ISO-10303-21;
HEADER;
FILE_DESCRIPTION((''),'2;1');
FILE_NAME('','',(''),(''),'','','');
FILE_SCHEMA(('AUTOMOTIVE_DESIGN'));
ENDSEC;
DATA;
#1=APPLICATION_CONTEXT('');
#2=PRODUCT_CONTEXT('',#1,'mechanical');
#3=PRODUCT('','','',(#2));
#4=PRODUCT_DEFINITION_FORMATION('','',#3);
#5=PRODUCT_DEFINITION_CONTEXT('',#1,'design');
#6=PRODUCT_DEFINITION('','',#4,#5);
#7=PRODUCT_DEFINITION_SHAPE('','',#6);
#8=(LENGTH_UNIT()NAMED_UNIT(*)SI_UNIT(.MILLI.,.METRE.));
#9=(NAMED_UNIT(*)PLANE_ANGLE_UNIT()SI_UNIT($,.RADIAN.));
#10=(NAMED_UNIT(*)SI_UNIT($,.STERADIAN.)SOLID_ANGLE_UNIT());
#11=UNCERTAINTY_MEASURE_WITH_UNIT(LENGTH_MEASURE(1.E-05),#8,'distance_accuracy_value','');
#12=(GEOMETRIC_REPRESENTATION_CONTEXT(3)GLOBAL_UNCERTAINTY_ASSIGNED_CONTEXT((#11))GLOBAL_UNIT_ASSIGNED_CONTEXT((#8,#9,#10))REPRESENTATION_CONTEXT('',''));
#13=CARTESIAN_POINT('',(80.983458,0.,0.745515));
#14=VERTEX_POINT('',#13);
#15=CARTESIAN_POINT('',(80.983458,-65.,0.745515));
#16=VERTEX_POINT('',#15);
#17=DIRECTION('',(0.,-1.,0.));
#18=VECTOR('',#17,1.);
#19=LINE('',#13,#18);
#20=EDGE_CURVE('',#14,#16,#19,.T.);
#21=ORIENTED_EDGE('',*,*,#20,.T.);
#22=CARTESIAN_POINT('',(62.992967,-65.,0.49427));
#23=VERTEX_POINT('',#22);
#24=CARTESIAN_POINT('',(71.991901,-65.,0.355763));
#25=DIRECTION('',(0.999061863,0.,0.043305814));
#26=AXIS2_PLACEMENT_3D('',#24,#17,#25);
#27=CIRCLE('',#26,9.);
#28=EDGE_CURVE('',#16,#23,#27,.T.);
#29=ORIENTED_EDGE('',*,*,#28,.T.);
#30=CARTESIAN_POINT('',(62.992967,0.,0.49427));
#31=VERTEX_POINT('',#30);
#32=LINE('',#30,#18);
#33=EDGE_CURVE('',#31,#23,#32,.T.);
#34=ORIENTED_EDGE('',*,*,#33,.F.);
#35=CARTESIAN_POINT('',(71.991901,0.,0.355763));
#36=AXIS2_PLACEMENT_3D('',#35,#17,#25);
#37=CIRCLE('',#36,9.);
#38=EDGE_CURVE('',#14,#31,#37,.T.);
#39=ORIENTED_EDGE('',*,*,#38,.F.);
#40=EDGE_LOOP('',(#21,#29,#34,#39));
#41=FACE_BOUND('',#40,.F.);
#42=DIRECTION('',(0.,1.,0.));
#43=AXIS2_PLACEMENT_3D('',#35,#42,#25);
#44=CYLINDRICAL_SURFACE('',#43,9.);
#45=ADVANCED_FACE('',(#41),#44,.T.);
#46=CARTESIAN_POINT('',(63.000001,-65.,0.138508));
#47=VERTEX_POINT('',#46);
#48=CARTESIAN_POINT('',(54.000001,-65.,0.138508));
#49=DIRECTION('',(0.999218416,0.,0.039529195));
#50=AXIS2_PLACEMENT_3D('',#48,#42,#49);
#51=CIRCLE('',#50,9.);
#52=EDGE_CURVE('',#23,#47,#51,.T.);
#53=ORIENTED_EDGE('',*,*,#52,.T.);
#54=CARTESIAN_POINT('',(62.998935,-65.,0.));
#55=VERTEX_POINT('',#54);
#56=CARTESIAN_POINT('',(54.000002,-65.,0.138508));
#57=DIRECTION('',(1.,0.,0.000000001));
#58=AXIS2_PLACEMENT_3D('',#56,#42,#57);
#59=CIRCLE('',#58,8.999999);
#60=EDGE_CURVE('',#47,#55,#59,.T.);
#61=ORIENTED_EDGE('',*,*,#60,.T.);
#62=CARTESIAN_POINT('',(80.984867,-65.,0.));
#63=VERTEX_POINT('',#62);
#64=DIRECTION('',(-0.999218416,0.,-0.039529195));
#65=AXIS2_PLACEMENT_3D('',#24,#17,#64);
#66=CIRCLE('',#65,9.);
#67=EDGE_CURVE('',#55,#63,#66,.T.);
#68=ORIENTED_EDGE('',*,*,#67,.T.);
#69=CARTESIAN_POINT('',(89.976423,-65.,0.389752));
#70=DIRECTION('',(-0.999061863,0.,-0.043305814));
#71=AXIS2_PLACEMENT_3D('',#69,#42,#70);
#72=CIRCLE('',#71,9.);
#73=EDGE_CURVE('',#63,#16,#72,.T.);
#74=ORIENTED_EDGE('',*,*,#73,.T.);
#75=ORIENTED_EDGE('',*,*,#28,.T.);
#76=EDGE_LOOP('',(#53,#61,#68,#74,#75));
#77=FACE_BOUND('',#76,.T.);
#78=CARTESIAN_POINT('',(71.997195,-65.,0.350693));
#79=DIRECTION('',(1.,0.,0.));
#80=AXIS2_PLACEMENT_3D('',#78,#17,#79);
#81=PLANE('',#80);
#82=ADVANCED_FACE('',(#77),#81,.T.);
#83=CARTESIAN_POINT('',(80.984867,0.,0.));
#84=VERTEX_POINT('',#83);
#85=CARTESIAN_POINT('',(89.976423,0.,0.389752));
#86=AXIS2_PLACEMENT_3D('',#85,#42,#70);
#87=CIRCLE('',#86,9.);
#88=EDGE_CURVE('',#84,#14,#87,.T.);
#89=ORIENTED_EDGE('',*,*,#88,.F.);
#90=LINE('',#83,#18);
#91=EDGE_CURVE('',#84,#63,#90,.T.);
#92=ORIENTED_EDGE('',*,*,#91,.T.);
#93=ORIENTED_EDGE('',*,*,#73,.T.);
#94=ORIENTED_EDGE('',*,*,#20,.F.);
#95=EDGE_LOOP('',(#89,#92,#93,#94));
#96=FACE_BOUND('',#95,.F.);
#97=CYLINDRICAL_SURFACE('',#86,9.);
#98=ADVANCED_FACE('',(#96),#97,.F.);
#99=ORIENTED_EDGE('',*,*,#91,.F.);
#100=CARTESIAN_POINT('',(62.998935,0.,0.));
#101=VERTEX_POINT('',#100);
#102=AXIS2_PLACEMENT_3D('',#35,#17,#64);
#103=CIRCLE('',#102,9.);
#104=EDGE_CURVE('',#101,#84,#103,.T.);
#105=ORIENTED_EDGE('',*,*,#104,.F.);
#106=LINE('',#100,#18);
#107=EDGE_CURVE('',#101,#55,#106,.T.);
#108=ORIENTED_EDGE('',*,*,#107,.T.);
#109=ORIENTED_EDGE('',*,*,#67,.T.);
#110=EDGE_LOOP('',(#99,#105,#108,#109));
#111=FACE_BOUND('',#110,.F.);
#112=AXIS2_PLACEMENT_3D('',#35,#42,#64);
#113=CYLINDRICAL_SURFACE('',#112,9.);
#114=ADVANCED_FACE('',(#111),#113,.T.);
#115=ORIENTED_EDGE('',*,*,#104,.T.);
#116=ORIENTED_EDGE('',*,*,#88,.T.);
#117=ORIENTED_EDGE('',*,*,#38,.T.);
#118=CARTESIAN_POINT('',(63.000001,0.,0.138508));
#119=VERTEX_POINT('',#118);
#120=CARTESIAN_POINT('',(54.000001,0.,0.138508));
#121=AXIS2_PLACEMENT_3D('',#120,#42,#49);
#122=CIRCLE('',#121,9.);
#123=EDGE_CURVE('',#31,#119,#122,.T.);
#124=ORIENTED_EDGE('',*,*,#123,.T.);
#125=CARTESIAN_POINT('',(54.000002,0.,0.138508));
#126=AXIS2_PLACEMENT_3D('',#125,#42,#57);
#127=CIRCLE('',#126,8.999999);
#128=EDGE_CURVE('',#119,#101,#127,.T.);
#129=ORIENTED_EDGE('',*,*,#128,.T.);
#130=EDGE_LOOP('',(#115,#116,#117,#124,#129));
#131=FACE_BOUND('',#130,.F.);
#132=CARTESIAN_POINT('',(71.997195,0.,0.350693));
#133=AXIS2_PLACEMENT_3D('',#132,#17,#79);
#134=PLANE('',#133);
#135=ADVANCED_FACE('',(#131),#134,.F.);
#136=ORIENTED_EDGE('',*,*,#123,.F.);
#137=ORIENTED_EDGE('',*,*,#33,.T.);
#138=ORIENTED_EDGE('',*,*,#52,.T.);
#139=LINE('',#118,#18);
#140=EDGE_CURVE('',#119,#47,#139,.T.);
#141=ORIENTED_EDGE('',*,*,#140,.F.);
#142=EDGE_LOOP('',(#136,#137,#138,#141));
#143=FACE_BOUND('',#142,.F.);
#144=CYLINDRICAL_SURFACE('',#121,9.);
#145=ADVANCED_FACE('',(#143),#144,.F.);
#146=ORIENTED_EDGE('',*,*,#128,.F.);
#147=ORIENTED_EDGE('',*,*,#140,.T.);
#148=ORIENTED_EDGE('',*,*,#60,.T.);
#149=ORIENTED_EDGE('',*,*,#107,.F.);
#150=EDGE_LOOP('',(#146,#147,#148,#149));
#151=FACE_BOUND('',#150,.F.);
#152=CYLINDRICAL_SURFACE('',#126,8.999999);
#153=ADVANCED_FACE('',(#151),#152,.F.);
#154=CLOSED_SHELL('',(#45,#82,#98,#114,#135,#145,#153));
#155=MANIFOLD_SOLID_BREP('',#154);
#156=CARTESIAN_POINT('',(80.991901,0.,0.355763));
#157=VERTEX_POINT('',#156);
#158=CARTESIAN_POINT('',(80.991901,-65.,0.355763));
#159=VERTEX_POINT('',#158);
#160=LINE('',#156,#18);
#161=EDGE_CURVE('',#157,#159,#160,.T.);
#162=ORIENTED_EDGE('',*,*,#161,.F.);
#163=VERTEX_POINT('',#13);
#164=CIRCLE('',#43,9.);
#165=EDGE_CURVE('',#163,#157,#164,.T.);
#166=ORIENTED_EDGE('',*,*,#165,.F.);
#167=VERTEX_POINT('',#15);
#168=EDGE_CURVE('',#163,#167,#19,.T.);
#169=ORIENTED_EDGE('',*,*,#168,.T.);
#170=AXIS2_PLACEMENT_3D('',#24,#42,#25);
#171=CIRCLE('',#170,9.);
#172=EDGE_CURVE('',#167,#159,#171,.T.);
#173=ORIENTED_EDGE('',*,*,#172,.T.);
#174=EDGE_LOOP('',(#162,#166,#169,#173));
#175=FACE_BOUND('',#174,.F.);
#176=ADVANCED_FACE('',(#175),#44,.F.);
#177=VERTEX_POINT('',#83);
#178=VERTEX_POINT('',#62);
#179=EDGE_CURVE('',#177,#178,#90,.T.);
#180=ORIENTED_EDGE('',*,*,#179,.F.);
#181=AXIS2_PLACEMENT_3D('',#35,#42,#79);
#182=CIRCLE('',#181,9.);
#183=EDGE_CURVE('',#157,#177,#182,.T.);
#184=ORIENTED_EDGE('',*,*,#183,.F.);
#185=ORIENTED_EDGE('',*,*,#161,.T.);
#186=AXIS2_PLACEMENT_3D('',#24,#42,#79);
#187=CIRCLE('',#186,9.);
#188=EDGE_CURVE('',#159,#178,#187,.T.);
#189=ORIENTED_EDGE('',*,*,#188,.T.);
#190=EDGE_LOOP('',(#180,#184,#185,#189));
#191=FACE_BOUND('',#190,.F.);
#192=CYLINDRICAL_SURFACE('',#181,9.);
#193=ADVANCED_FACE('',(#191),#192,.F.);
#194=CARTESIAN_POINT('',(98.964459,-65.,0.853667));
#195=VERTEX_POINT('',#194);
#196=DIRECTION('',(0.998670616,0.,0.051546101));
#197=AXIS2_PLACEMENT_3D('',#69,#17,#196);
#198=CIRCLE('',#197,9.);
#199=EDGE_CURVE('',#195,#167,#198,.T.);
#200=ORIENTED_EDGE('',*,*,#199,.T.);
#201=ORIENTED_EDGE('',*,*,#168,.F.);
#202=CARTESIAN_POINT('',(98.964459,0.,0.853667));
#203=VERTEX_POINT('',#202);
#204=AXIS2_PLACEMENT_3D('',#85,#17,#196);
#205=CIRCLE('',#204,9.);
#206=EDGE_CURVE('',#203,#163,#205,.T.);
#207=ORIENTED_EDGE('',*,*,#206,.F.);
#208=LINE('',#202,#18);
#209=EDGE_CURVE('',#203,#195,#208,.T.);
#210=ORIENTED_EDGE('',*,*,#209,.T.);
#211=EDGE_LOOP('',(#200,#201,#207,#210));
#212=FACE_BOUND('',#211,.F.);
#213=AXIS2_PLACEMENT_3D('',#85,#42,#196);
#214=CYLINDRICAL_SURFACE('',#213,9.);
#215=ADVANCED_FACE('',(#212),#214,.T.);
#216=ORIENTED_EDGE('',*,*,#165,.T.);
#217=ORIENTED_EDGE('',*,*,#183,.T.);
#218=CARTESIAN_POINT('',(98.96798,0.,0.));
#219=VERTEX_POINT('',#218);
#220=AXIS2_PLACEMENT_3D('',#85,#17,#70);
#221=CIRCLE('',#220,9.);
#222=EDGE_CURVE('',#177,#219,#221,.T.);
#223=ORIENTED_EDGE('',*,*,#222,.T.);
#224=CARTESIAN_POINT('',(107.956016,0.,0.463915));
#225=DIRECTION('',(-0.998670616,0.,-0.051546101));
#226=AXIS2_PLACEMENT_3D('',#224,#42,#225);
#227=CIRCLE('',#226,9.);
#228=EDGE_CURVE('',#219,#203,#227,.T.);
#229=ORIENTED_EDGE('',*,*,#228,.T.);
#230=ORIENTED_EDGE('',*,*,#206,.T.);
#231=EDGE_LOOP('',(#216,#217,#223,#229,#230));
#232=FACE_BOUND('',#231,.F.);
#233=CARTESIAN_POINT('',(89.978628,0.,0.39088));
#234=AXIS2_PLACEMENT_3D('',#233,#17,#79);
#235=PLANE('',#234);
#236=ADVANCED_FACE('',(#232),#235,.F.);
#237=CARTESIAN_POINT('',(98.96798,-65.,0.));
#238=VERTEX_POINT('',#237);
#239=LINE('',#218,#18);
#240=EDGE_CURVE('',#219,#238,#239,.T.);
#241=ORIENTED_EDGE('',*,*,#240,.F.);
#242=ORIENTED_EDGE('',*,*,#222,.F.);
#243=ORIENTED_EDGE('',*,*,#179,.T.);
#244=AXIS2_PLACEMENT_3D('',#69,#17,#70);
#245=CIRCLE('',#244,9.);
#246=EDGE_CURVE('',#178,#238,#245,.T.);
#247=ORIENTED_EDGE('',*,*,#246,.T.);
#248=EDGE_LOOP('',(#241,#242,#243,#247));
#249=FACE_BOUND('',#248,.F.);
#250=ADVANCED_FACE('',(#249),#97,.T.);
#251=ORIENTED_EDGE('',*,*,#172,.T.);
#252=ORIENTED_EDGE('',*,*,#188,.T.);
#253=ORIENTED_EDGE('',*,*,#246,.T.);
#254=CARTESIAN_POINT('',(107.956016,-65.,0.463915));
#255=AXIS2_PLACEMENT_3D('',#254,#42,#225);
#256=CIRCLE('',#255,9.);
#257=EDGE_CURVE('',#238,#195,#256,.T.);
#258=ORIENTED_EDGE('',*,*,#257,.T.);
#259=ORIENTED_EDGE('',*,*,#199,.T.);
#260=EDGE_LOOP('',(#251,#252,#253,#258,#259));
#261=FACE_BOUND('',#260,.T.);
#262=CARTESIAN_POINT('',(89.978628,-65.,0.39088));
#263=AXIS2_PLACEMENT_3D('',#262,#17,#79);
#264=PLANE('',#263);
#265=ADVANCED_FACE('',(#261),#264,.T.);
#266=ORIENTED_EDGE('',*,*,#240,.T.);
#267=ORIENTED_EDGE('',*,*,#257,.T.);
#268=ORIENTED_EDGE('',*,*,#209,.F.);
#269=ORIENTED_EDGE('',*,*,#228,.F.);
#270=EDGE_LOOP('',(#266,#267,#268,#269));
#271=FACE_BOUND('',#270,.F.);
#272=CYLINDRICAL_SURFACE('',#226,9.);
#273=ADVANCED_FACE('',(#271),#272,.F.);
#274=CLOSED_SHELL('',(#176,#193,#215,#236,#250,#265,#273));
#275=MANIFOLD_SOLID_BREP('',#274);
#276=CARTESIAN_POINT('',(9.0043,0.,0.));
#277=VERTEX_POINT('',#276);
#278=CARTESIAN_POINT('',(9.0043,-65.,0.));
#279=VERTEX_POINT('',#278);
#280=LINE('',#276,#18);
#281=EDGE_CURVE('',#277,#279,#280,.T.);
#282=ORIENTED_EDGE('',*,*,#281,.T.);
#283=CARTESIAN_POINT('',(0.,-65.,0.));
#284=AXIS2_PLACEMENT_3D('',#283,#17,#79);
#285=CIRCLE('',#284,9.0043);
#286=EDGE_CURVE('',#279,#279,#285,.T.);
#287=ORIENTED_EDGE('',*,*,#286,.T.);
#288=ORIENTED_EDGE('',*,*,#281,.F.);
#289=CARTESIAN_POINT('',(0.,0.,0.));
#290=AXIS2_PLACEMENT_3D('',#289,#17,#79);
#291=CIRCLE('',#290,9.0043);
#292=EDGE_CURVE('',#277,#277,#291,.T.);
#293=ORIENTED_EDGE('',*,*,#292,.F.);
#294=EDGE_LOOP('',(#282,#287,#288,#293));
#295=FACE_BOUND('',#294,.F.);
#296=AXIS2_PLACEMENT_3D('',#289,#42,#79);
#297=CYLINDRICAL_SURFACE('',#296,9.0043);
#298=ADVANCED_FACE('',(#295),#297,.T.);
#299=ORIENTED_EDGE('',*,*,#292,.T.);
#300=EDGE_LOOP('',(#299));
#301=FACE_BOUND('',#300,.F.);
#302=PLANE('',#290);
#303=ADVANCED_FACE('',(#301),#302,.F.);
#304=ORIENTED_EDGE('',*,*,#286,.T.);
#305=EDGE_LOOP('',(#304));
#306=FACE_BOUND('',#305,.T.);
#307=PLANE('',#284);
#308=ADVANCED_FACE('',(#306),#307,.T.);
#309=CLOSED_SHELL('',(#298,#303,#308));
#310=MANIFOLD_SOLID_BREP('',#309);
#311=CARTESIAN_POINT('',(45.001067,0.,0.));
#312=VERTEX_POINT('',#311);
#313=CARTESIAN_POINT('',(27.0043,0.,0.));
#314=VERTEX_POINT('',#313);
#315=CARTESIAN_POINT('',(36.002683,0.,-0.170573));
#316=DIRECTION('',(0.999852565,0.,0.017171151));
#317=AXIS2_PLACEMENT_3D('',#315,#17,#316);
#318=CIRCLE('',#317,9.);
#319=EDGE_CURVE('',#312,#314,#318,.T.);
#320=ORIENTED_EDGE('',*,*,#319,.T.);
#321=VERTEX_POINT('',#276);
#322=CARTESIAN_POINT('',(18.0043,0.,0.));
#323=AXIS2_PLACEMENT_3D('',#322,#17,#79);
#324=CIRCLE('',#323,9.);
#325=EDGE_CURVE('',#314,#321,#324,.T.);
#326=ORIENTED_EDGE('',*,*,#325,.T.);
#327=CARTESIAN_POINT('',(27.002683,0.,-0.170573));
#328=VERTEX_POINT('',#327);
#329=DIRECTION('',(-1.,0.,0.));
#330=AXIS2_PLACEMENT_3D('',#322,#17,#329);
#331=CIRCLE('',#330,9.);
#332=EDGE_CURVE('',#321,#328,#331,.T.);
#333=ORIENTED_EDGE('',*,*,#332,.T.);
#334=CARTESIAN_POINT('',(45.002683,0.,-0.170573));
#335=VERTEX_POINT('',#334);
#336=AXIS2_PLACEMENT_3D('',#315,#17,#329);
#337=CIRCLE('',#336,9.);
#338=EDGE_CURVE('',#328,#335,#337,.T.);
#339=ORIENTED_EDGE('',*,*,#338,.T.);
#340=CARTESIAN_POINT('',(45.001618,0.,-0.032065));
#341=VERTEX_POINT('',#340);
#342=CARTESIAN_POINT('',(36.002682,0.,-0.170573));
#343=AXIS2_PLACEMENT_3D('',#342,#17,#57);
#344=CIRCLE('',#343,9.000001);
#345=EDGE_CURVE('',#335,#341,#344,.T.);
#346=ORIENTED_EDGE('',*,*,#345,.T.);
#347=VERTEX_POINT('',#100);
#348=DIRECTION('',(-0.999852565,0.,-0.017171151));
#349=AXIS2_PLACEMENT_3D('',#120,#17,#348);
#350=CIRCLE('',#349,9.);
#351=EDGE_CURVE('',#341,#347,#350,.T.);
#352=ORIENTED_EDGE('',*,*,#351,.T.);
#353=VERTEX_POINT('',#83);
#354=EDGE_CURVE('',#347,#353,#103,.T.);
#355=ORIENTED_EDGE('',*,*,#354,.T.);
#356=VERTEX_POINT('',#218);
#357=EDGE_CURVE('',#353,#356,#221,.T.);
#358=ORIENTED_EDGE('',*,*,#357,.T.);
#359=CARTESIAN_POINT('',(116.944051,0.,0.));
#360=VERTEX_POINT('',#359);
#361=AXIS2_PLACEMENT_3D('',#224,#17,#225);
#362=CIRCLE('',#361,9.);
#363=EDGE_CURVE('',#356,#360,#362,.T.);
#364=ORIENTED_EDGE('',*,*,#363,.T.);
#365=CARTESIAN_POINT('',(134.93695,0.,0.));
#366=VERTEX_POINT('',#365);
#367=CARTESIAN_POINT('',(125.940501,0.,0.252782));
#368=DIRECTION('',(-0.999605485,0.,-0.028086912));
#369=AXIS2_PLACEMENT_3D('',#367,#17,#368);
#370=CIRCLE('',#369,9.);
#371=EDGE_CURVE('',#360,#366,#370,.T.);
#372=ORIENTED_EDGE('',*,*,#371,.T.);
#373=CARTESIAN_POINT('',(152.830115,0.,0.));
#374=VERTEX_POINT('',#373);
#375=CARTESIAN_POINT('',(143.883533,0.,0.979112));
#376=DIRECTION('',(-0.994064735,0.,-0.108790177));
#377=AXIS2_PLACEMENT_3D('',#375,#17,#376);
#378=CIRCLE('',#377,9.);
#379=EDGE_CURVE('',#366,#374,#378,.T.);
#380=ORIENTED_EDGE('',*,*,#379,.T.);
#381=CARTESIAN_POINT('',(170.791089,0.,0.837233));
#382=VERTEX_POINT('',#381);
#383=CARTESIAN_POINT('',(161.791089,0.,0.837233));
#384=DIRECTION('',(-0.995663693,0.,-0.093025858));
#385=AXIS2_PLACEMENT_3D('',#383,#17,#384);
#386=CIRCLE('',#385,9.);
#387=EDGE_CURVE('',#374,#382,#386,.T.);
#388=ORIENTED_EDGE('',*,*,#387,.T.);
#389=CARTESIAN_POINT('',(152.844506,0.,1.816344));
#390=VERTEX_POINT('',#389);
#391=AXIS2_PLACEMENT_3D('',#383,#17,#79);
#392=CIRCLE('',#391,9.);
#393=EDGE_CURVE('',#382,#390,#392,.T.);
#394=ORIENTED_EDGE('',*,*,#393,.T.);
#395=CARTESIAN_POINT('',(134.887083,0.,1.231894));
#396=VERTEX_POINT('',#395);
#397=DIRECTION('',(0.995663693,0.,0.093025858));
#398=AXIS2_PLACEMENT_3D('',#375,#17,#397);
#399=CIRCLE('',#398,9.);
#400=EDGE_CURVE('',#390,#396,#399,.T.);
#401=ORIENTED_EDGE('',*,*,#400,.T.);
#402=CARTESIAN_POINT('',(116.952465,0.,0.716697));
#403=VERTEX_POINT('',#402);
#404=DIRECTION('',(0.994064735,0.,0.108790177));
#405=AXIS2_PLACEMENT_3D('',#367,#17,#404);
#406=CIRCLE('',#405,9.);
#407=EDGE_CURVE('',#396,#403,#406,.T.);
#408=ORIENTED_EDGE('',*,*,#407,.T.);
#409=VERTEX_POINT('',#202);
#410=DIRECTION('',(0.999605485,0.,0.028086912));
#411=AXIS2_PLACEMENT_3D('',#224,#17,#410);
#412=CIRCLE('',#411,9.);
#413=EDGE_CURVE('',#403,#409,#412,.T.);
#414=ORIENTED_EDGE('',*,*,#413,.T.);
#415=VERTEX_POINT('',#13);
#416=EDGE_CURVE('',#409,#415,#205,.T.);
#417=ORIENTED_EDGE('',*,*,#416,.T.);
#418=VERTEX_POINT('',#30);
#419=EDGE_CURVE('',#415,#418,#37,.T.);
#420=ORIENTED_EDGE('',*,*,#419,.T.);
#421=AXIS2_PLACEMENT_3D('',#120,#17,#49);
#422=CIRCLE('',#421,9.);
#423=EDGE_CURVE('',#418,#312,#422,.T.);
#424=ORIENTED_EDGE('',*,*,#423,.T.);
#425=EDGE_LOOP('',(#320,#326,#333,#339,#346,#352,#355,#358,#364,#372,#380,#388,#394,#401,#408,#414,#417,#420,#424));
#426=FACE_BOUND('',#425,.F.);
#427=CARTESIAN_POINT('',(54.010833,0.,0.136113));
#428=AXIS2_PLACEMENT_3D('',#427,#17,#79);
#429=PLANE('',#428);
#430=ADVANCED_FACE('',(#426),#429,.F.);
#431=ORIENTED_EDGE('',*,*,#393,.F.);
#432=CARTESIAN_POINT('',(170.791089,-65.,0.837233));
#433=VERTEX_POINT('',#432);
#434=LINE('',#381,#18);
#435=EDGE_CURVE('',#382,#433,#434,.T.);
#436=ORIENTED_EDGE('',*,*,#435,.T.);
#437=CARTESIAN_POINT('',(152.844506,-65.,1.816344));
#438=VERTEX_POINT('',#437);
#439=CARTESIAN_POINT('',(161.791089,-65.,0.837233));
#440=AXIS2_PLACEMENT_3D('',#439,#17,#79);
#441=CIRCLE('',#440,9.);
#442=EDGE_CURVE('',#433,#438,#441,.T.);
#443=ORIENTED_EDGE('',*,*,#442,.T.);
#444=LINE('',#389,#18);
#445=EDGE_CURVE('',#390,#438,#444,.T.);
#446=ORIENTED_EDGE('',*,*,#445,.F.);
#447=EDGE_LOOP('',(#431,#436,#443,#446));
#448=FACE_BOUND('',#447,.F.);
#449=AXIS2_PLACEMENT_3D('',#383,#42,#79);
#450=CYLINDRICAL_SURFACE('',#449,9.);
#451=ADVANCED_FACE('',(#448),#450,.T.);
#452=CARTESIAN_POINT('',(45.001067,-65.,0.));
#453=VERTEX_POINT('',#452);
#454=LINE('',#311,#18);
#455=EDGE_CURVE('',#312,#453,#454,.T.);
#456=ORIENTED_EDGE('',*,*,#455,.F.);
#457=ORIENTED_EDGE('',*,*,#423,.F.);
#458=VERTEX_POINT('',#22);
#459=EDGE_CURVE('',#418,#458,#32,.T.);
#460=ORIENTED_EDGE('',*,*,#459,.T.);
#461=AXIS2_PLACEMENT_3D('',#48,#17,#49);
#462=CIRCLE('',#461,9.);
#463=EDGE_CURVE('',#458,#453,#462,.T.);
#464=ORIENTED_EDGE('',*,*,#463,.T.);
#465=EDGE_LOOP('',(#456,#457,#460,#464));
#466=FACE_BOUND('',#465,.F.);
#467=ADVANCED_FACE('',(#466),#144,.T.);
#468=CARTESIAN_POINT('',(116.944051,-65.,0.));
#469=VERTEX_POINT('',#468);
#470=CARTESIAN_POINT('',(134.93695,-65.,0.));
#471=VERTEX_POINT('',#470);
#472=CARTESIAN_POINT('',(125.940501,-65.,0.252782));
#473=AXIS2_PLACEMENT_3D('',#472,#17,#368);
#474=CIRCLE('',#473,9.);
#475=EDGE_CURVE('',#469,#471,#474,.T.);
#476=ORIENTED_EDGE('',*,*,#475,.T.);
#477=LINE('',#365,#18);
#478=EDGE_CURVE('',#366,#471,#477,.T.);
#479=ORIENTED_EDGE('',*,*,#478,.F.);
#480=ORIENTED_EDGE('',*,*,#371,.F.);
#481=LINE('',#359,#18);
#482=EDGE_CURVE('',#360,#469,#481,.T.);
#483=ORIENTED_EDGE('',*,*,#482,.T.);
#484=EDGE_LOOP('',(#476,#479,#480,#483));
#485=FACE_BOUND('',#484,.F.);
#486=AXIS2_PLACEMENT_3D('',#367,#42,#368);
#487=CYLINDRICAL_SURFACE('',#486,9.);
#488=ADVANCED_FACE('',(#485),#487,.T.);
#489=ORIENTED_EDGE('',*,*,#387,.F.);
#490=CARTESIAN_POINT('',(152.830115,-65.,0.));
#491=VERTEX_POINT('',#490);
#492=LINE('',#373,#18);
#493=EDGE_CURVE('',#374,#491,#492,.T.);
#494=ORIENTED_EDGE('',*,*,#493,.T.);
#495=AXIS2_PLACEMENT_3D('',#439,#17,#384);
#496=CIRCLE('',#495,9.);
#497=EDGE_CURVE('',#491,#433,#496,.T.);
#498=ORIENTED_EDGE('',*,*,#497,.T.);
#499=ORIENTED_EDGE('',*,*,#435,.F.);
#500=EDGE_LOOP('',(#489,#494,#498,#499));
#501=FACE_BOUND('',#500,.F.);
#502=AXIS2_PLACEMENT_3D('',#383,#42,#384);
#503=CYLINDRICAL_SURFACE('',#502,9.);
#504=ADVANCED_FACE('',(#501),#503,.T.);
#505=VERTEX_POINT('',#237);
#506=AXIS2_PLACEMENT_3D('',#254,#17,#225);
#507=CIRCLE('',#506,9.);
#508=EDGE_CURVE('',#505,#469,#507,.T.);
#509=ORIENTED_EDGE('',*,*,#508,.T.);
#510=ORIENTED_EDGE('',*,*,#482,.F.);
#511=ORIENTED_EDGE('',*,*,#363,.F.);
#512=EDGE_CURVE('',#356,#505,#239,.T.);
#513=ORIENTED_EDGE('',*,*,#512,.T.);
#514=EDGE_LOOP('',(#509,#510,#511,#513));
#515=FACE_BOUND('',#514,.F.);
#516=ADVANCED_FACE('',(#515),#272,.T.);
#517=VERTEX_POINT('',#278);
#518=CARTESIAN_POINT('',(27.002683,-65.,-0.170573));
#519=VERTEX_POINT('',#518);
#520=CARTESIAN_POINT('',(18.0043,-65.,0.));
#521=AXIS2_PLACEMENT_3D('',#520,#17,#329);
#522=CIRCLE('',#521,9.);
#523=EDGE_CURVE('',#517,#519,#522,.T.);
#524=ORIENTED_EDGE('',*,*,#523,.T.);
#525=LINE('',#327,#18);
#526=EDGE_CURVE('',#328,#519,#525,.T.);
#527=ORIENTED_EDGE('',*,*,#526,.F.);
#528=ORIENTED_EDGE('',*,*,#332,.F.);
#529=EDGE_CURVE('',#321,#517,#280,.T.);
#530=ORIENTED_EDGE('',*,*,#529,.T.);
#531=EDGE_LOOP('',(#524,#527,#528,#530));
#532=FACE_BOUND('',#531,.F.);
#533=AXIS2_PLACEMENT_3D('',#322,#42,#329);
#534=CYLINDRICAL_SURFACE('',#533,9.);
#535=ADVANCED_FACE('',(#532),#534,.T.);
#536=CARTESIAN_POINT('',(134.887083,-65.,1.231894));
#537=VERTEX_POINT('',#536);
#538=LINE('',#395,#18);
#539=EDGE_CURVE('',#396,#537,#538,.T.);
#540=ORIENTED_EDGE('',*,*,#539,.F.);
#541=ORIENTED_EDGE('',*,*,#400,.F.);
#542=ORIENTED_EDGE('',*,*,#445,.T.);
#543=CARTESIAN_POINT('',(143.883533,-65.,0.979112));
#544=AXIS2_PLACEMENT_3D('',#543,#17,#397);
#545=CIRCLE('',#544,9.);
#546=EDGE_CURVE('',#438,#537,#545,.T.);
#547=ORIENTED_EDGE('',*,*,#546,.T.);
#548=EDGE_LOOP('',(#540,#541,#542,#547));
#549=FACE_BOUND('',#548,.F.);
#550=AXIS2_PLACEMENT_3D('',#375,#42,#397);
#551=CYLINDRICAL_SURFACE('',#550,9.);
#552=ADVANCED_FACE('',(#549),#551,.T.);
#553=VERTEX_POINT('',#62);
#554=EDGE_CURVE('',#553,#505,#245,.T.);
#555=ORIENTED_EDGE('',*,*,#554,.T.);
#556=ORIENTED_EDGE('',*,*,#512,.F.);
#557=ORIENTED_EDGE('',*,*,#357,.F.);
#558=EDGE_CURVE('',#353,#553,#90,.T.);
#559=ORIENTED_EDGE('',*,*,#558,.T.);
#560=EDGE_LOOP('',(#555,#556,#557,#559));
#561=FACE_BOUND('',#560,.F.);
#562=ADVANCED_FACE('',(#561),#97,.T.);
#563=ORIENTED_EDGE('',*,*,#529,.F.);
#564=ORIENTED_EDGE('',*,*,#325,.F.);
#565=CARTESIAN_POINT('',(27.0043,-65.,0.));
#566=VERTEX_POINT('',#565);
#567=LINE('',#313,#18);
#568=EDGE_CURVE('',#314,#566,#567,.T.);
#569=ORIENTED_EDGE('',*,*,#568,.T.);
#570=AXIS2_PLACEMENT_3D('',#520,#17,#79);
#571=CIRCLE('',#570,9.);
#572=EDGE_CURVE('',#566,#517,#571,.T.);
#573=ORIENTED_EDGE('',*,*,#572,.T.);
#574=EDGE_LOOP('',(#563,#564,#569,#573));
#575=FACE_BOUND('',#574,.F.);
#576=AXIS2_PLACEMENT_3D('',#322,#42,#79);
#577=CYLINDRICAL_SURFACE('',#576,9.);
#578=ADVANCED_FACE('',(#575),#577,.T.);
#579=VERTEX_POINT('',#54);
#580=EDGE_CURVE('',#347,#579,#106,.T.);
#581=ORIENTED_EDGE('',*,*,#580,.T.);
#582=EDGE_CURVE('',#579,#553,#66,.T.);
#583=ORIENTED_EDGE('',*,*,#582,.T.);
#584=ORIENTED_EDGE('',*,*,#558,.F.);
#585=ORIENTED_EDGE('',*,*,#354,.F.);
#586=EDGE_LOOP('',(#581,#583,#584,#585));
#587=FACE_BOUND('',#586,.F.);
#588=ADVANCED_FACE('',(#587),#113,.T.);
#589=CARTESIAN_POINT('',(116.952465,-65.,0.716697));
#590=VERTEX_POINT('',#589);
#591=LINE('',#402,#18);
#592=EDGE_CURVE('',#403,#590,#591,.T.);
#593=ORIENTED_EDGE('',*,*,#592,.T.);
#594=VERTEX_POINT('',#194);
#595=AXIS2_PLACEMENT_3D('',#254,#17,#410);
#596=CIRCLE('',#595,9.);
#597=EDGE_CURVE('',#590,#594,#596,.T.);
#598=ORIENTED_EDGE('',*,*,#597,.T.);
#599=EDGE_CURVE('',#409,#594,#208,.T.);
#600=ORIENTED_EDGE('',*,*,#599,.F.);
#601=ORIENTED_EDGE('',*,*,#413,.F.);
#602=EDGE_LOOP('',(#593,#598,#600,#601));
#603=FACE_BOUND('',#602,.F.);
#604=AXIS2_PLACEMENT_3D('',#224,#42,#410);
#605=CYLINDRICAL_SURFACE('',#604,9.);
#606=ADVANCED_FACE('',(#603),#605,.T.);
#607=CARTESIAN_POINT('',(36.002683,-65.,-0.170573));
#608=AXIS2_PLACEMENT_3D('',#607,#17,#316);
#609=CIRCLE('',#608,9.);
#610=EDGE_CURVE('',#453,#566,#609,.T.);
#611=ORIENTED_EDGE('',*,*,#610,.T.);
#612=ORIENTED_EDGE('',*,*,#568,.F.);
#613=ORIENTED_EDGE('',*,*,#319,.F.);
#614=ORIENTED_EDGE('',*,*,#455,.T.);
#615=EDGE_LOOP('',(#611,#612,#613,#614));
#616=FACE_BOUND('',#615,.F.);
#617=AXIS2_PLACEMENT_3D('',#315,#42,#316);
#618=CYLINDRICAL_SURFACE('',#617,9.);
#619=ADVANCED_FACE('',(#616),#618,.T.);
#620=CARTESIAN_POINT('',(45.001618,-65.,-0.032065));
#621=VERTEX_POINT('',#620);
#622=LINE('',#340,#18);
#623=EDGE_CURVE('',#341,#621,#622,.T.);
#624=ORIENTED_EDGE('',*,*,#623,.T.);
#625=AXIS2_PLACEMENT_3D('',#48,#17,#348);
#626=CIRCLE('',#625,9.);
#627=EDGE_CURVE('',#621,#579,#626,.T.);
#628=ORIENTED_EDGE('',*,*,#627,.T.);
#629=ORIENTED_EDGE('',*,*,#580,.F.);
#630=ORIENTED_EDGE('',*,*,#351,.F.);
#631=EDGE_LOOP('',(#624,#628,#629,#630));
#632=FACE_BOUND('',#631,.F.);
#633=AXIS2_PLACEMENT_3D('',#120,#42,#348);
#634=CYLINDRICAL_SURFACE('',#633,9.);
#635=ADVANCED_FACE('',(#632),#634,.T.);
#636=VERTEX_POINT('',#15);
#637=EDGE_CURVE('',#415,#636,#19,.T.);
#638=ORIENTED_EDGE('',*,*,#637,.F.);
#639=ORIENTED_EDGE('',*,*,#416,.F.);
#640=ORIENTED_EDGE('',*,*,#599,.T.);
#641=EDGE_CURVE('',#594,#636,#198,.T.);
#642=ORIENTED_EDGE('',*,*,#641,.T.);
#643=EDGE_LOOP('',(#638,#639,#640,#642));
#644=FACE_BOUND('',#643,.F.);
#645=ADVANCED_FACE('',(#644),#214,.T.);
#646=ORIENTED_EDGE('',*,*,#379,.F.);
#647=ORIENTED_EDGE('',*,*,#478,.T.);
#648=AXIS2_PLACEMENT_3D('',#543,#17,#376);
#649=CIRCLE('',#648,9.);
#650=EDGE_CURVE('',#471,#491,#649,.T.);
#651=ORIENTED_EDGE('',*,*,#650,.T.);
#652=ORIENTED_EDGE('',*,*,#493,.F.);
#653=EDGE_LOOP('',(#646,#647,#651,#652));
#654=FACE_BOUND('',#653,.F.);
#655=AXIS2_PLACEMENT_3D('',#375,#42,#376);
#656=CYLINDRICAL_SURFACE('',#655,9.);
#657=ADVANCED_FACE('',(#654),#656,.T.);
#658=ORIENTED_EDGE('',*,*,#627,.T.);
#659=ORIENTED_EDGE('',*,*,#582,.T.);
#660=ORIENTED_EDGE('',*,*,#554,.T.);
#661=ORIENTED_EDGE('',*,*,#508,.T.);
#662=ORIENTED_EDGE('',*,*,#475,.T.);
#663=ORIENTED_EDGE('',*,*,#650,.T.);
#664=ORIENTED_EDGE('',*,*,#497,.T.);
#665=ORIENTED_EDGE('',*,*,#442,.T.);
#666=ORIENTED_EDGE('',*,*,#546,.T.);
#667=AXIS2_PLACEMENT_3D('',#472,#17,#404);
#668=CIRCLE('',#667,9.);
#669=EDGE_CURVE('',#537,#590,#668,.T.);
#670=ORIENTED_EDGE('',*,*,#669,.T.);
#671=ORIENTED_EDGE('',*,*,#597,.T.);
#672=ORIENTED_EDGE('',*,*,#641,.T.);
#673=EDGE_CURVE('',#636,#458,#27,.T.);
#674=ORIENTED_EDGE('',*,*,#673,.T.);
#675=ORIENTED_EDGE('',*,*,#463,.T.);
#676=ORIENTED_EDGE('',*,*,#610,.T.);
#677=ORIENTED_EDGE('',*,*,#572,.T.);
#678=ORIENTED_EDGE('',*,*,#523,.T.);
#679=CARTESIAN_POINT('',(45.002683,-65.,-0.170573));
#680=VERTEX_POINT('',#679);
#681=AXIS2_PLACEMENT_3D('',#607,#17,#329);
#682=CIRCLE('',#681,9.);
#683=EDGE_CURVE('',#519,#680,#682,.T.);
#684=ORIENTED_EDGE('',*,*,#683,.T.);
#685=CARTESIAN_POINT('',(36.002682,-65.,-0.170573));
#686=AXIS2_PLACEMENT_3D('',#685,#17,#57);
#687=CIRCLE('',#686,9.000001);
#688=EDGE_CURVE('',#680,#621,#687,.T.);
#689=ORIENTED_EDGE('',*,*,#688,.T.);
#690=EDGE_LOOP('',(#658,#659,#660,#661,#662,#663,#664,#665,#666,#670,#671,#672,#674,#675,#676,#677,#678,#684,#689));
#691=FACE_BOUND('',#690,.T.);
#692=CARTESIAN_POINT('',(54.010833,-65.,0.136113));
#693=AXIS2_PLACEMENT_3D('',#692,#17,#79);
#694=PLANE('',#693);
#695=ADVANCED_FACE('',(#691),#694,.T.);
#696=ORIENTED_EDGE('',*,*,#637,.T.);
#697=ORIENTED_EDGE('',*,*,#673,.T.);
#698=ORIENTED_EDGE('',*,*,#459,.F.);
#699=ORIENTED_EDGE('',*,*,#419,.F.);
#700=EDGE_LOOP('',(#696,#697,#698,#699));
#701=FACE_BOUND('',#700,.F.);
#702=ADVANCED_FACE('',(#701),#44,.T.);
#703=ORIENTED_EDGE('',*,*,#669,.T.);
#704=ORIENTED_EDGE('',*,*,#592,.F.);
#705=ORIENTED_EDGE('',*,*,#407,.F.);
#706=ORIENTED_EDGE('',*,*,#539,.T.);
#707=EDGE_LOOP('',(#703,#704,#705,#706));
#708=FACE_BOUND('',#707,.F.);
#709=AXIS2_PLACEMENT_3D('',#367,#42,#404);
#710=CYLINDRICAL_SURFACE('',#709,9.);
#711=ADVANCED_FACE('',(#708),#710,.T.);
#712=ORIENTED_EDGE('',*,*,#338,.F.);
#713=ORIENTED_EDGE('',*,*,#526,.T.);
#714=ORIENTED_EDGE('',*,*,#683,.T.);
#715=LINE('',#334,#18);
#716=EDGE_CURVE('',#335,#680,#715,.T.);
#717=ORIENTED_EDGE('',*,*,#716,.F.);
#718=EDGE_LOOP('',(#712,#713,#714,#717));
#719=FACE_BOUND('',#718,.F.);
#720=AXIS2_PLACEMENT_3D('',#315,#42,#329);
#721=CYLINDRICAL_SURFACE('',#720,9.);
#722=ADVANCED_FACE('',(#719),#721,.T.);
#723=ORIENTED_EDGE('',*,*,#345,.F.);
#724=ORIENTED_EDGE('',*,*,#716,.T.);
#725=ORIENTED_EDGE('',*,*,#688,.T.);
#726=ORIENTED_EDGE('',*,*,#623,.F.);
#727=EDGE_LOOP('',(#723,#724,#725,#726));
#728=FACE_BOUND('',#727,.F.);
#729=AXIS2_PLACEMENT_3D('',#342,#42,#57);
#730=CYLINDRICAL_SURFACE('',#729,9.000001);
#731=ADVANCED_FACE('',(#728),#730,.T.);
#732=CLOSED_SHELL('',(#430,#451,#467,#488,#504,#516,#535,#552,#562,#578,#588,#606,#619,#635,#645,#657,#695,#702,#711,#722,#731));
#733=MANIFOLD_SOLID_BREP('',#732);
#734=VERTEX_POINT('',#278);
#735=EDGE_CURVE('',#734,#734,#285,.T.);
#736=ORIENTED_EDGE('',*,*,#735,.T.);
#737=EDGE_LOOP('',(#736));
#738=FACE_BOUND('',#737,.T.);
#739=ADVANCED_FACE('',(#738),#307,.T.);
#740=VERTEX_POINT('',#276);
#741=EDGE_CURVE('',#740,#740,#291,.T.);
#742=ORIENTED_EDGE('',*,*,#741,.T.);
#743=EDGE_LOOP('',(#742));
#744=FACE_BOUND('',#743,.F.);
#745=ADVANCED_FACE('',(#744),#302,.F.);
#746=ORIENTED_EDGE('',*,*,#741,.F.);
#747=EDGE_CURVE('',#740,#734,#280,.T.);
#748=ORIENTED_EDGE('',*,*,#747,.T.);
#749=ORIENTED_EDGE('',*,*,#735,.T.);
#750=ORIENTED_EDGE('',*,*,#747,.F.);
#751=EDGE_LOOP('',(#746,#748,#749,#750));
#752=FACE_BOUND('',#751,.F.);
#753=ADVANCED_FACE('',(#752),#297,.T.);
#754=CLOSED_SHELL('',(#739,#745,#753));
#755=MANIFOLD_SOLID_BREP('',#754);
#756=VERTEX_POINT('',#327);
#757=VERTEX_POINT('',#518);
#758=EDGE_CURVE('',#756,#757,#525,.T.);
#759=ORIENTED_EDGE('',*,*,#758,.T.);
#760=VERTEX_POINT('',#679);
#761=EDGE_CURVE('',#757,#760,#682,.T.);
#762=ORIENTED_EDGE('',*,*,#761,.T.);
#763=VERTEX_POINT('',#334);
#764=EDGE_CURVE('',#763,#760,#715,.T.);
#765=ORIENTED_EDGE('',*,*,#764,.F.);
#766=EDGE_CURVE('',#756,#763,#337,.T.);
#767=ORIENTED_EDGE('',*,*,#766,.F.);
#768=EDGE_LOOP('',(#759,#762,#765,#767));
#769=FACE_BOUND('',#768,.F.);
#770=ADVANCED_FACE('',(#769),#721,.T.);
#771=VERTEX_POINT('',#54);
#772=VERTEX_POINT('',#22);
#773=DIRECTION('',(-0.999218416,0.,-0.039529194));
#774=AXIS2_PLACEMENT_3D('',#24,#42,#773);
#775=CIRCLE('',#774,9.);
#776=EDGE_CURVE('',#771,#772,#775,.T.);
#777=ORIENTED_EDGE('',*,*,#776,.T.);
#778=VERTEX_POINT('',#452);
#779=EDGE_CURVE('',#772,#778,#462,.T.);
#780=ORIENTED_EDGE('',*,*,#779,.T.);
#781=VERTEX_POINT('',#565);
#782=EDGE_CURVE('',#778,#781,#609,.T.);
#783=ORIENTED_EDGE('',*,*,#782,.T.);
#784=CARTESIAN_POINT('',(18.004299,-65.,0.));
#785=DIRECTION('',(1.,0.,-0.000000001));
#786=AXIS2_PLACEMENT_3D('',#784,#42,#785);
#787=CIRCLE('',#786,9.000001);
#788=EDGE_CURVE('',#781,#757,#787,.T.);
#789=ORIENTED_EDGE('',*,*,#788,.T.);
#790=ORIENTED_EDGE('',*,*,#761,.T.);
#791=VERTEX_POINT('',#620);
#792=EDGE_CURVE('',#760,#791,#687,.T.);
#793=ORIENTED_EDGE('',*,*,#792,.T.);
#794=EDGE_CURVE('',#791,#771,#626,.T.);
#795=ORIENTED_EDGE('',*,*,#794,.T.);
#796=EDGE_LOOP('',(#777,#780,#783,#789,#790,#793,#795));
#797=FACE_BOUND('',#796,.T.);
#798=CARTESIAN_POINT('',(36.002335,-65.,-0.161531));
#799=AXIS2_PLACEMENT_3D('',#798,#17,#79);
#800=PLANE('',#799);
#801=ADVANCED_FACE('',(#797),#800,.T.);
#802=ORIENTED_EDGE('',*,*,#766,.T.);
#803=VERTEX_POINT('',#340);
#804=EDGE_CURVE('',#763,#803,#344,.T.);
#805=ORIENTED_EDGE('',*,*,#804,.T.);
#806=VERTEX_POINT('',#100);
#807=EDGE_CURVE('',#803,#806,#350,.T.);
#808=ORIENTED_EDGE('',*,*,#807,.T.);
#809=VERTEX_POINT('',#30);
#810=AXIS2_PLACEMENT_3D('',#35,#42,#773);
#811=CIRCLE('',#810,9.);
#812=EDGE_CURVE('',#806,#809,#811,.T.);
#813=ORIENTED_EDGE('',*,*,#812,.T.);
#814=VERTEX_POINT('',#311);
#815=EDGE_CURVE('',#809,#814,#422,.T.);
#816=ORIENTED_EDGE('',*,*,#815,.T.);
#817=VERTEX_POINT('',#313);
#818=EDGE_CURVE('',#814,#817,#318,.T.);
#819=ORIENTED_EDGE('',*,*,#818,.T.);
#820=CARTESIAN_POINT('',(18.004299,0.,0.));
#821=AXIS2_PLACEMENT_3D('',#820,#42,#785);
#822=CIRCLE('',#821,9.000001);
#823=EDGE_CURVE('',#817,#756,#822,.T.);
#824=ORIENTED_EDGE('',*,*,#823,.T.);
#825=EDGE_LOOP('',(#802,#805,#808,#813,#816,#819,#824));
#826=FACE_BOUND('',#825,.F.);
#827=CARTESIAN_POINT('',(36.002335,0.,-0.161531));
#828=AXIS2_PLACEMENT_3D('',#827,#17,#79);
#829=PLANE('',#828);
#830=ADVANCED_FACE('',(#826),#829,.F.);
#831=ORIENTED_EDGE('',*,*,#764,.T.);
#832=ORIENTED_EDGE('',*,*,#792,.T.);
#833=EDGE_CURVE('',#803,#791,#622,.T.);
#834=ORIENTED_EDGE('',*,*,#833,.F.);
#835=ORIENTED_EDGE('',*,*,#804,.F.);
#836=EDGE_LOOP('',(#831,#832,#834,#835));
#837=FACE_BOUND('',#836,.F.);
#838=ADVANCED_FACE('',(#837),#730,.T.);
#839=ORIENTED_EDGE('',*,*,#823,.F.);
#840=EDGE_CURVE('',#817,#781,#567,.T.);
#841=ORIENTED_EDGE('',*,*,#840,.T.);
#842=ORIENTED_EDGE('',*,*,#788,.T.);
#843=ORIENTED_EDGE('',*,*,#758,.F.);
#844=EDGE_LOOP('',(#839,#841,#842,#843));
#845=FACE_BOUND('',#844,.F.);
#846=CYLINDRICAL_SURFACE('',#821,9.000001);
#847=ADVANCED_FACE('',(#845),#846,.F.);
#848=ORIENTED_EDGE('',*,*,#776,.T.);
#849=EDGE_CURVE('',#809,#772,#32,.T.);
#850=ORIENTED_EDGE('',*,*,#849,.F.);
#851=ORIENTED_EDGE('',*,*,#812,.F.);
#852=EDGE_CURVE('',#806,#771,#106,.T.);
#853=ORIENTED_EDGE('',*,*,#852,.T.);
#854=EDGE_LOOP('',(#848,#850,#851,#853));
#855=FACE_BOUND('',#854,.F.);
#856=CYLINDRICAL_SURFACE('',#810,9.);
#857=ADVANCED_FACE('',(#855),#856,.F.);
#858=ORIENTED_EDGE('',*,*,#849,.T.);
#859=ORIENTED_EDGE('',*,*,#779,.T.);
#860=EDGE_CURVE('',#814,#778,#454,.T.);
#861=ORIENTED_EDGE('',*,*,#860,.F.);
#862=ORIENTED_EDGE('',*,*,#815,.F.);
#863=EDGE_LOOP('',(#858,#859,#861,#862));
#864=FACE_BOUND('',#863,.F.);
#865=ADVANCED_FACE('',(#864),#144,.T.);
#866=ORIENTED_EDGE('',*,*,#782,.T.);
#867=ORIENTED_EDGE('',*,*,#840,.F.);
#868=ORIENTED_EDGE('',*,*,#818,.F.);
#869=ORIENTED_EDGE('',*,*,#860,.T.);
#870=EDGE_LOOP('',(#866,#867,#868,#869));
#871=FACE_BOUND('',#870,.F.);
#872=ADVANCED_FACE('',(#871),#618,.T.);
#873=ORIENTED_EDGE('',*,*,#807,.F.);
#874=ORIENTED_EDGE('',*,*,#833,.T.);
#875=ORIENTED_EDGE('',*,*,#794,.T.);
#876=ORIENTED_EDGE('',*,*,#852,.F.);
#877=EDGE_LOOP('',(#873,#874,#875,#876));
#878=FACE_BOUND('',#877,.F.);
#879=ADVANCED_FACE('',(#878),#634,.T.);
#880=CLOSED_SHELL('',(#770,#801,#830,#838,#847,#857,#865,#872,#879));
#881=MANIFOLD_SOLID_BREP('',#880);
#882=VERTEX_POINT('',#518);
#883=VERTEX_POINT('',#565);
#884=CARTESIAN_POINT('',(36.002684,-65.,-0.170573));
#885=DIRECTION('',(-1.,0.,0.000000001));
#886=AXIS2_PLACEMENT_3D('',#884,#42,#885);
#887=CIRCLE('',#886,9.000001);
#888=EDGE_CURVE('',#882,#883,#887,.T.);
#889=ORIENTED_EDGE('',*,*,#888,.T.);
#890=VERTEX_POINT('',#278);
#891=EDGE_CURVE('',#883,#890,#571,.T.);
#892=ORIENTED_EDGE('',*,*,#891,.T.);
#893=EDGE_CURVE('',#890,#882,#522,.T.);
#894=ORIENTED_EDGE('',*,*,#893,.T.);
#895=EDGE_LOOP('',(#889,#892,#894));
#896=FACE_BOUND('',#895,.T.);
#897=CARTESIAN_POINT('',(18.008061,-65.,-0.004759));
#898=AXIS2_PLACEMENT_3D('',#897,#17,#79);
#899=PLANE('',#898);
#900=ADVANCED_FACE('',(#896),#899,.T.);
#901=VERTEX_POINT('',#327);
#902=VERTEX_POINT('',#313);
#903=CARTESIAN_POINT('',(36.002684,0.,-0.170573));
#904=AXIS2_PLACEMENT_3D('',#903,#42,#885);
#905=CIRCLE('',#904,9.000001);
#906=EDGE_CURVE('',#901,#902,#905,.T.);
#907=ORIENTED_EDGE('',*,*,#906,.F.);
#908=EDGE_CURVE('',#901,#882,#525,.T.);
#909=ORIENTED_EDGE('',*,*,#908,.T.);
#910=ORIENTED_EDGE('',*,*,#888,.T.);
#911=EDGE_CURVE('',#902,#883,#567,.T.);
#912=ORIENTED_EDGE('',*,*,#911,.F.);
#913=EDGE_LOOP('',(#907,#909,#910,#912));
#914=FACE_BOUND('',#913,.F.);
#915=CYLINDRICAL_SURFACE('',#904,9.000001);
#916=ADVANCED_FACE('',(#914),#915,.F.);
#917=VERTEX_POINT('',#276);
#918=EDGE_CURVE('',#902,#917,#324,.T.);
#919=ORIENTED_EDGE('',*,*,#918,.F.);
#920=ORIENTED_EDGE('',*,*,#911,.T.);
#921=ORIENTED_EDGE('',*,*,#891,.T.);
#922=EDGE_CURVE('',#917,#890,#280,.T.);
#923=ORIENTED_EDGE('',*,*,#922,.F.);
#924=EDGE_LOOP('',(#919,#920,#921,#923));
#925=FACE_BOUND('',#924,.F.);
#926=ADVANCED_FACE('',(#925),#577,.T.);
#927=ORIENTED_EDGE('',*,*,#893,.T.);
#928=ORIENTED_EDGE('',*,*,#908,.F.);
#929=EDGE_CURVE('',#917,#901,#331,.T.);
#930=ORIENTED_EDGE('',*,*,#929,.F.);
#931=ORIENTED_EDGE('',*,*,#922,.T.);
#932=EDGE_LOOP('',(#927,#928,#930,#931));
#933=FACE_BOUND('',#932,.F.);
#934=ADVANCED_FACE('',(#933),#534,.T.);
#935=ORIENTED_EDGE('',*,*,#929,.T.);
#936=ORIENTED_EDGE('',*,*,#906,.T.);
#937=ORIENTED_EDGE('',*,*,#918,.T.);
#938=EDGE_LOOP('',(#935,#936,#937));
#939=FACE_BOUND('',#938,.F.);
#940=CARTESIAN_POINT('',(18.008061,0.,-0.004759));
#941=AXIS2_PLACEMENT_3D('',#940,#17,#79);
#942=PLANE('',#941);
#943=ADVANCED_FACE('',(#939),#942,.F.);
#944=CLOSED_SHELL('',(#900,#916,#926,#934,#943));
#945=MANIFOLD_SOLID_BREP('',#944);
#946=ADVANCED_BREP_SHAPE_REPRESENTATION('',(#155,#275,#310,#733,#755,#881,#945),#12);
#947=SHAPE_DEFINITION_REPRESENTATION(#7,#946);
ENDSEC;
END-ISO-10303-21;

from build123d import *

# Parameters (mm, degrees)
F0_R     = 9.0043
F1_DEPTH = 65
F2_DEPTH = 65


with BuildPart() as f1:
    # F0 (on Front) → F1 (new body)
    with BuildSketch(Plane.XZ):
        Circle(F0_R)
    extrude(amount=F1_DEPTH)


with BuildPart() as f1b:
    # F0 (on Front) → F1, piece 2 (new body)
    with BuildSketch(Plane.XZ):
        with BuildLine():
            ThreePointArc((27.0043, 0), (18.0043, 9), (9.0043, 0))
            ThreePointArc((9.0043, 0), (17.9190098256, -8.9995958568), (27.0026834636, -0.1705726889))
            ThreePointArc((27.0026834636, -0.1705726889), (27.0030876068, -0.0852825145), (27.0043, 0))
        make_face()
    extrude(amount=F1_DEPTH)


with BuildPart() as f1c:
    # F0 (on Front) → F1, piece 3 (new body)
    with BuildSketch(Plane.XZ):
        with BuildLine():
            ThreePointArc((45.0013565478, -0.0160323255), (36.0107009342, 8.82942374), (27.0043, 0))
            ThreePointArc((27.0043, 0), (27.0038958568, -0.0852901744), (27.0026834636, -0.1705726889))
            ThreePointArc((27.0026834636, -0.1705726889), (36.0026834636, -9.1705726889), (45.0026834636, -0.1705726889))
            ThreePointArc((45.0026834636, -0.1705726889), (45.0023517285, -0.0932996589), (45.0013565478, -0.0160323255))
        make_face()
        with BuildLine():
            ThreePointArc((62.9929668109, 0.4942702989), (53.7448335524, 9.1348895724), (45.0013279832, -0.016032816))
            ThreePointArc((45.0013279832, -0.016032816), (54.008018538, -8.8614888815), (62.9989352075, 0))
            ThreePointArc((62.9989352075, 0), (62.9925570229, 0.2470941665), (62.9929668109, 0.4942702989))
        make_face()
    extrude(amount=F1_DEPTH)


with BuildPart() as f1d:
    # F0 (on Front) → F1, piece 4 (new body)
    with BuildSketch(Plane.XZ):
        with BuildLine():
            ThreePointArc((80.9834577198, 0.745515077), (71.8662244177, 9.3548852314), (62.9929668109, 0.4942702989))
            ThreePointArc((62.9929668109, 0.4942702989), (62.9982423314, 0.3164236907), (63.0000010674, 0.1385075474))
            ThreePointArc((63.0000010674, 0.1385075474), (62.9997345985, 0.0692517232), (62.9989352075, 0))
            ThreePointArc((62.9989352075, 0), (71.9919009511, -8.6442372485), (80.9848666946, 0))
            ThreePointArc((80.9848666946, 0), (80.9764395366, 0.3727429432), (80.9834577198, 0.745515077))
        make_face()
    extrude(amount=F1_DEPTH)


with BuildPart() as f1e:
    # F0 (on Front) → F1, piece 5 (new body)
    with BuildSketch(Plane.XZ):
        with BuildLine():
            ThreePointArc((98.9644590085, 0.8536672309), (89.9222912288, 9.3895895297), (80.9834577198, 0.745515077))
            ThreePointArc((80.9834577198, 0.745515077), (80.9897898957, 0.5506846354), (80.9919009511, 0.3557627515))
            ThreePointArc((80.9919009511, 0.3557627515), (80.9901422151, 0.1778466082), (80.9848666946, 0))
            ThreePointArc((80.9848666946, 0), (89.9764234633, -8.6102476745), (98.967980232, 0))
            ThreePointArc((98.967980232, 0), (98.9560923398, 0.4267918422), (98.9644590085, 0.8536672309))
        make_face()
    extrude(amount=F1_DEPTH)


with BuildPart() as f2:
    # F0 (on Front) → F2 (new body)
    with BuildSketch(Plane.XZ):
        Circle(F0_R)
    extrude(amount=F2_DEPTH)


with BuildPart() as f2b:
    # F0 (on Front) → F2, piece 2 (new body)
    with BuildSketch(Plane.XZ):
        with BuildLine():
            ThreePointArc((62.9929668109, 0.4942702989), (53.7448335524, 9.1348895724), (45.0013279832, -0.016032816))
            ThreePointArc((45.0013279832, -0.016032816), (54.008018538, -8.8614888815), (62.9989352075, 0))
            ThreePointArc((62.9989352075, 0), (62.9925570229, 0.2470941665), (62.9929668109, 0.4942702989))
        make_face()
        with BuildLine():
            ThreePointArc((27.0043, 0), (18.0043, 9), (9.0043, 0))
            ThreePointArc((9.0043, 0), (17.9190098256, -8.9995958568), (27.0026834636, -0.1705726889))
            ThreePointArc((27.0026834636, -0.1705726889), (27.0030876068, -0.0852825145), (27.0043, 0))
        make_face()
        with BuildLine():
            ThreePointArc((45.0013565478, -0.0160323255), (36.0107009342, 8.82942374), (27.0043, 0))
            ThreePointArc((27.0043, 0), (27.0038958568, -0.0852901744), (27.0026834636, -0.1705726889))
            ThreePointArc((27.0026834636, -0.1705726889), (36.0026834636, -9.1705726889), (45.0026834636, -0.1705726889))
            ThreePointArc((45.0026834636, -0.1705726889), (45.0023517285, -0.0932996589), (45.0013565478, -0.0160323255))
        make_face()
        with BuildLine():
            ThreePointArc((27.0026834636, -0.1705726889), (27.0038958568, -0.0852901744), (27.0043, 0))
            ThreePointArc((27.0043, 0), (27.0030876068, -0.0852825145), (27.0026834636, -0.1705726889))
        make_face()
        with BuildLine():
            ThreePointArc((80.9834577198, 0.745515077), (71.8662244177, 9.3548852314), (62.9929668109, 0.4942702989))
            ThreePointArc((62.9929668109, 0.4942702989), (62.9982423314, 0.3164236907), (63.0000010674, 0.1385075474))
            ThreePointArc((63.0000010674, 0.1385075474), (62.9997345985, 0.0692517232), (62.9989352075, 0))
            ThreePointArc((62.9989352075, 0), (71.9919009511, -8.6442372485), (80.9848666946, 0))
            ThreePointArc((80.9848666946, 0), (80.9764395366, 0.3727429432), (80.9834577198, 0.745515077))
        make_face()
        with BuildLine():
            ThreePointArc((63.0000010674, 0.1385075474), (62.9982423314, 0.3164236907), (62.9929668109, 0.4942702989))
            ThreePointArc((62.9929668109, 0.4942702989), (62.9925570229, 0.2470941665), (62.9989352075, 0))
            ThreePointArc((62.9989352075, 0), (62.9997345985, 0.0692517232), (63.0000010674, 0.1385075474))
        make_face()
        with BuildLine():
            ThreePointArc((98.9644590085, 0.8536672309), (89.9222912288, 9.3895895297), (80.9834577198, 0.745515077))
            ThreePointArc((80.9834577198, 0.745515077), (80.9897898957, 0.5506846354), (80.9919009511, 0.3557627515))
            ThreePointArc((80.9919009511, 0.3557627515), (80.9901422151, 0.1778466082), (80.9848666946, 0))
            ThreePointArc((80.9848666946, 0), (89.9764234633, -8.6102476745), (98.967980232, 0))
            ThreePointArc((98.967980232, 0), (98.9560923398, 0.4267918422), (98.9644590085, 0.8536672309))
        make_face()
        with BuildLine():
            ThreePointArc((80.9919009511, 0.3557627515), (80.9897898957, 0.5506846354), (80.9834577198, 0.745515077))
            ThreePointArc((80.9834577198, 0.745515077), (80.9764395366, 0.3727429432), (80.9848666946, 0))
            ThreePointArc((80.9848666946, 0), (80.9901422151, 0.1778466082), (80.9919009511, 0.3557627515))
        make_face()
        with BuildLine():
            ThreePointArc((116.9524651409, 0.716697116), (108.0245445118, 9.4636540023), (98.9644590085, 0.8536672309))
            ThreePointArc((98.9644590085, 0.8536672309), (98.9734318524, 0.6217869068), (98.9764234633, 0.3897523255))
            ThreePointArc((98.9764234633, 0.3897523255), (98.9743124079, 0.1948304416), (98.967980232, 0))
            ThreePointArc((98.967980232, 0), (107.9560157772, -8.5360850946), (116.9440513223, 0))
            ThreePointArc((116.9440513223, 0), (116.9411208158, 0.3584323492), (116.9524651409, 0.716697116))
        make_face()
        with BuildLine():
            ThreePointArc((98.9764234633, 0.3897523255), (98.9734318524, 0.6217869068), (98.9644590085, 0.8536672309))
            ThreePointArc((98.9644590085, 0.8536672309), (98.9560923398, 0.4267918422), (98.967980232, 0))
            ThreePointArc((98.967980232, 0), (98.9743124079, 0.1948304416), (98.9764234633, 0.3897523255))
        make_face()
        with BuildLine():
            ThreePointArc((134.8870833011, 1.2318938033), (125.6820698577, 9.2490710848), (116.9524651409, 0.716697116))
            ThreePointArc((116.9524651409, 0.716697116), (116.9551280743, 0.5903184783), (116.9560157772, 0.4639149054))
            ThreePointArc((116.9560157772, 0.4639149054), (116.9530241662, 0.2318803241), (116.9440513223, 0))
            ThreePointArc((116.9440513223, 0), (125.940500686, -8.7472177894), (134.9369500497, 0))
            ThreePointArc((134.9369500497, 0), (134.8908973596, 0.6150919971), (134.8870833011, 1.2318938033))
        make_face()
        with BuildLine():
            ThreePointArc((116.9560157772, 0.4639149054), (116.9551280743, 0.5903184783), (116.9524651409, 0.716697116))
            ThreePointArc((116.9524651409, 0.716697116), (116.9411208158, 0.3584323492), (116.9440513223, 0))
            ThreePointArc((116.9440513223, 0), (116.9530241662, 0.2318803241), (116.9560157772, 0.4639149054))
        make_face()
        with BuildLine():
            ThreePointArc((152.8445059025, 1.8163443168), (143.5907695532, 9.9743486524), (134.8870833011, 1.2318938033))
            ThreePointArc((134.8870833011, 1.2318938033), (134.9271364174, 0.7430660386), (134.940500686, 0.2527822106))
            ThreePointArc((134.940500686, 0.2527822106), (134.9396129832, 0.1263786377), (134.9369500497, 0))
            ThreePointArc((134.9369500497, 0), (143.8835326649, -8.0208884073), (152.83011528, 0))
            ThreePointArc((152.83011528, 0), (152.7913709763, 0.908536131), (152.8445059025, 1.8163443168))
        make_face()
        with BuildLine():
            ThreePointArc((134.940500686, 0.2527822106), (134.9271364174, 0.7430660386), (134.8870833011, 1.2318938033))
            ThreePointArc((134.8870833011, 1.2318938033), (134.8908973596, 0.6150919971), (134.9369500497, 0))
            ThreePointArc((134.9369500497, 0), (134.9396129832, 0.1263786377), (134.940500686, 0.2527822106))
        make_face()
        with BuildLine():
            ThreePointArc((170.7910885176, 0.8372327241), (162.2813723456, 9.8238684555), (152.8445059025, 1.8163443168))
            ThreePointArc((152.8445059025, 1.8163443168), (152.87377068, 1.3981825063), (152.8835326649, 0.9791115927))
            ThreePointArc((152.8835326649, 0.9791115927), (152.8701683962, 0.4888277647), (152.83011528, 0))
            ThreePointArc((152.83011528, 0), (162.2101594312, -8.1530052911), (170.7910885176, 0.8372327241))
        make_face()
        with BuildLine():
            ThreePointArc((152.8835326649, 0.9791115927), (152.87377068, 1.3981825063), (152.8445059025, 1.8163443168))
            ThreePointArc((152.8445059025, 1.8163443168), (152.7913709763, 0.908536131), (152.83011528, 0))
            ThreePointArc((152.83011528, 0), (152.8701683962, 0.4888277647), (152.8835326649, 0.9791115927))
        make_face()
    extrude(amount=F2_DEPTH)


solid = Compound([f1.part, f1b.part, f1c.part, f1d.part, f1e.part, f2.part, f2b.part])
